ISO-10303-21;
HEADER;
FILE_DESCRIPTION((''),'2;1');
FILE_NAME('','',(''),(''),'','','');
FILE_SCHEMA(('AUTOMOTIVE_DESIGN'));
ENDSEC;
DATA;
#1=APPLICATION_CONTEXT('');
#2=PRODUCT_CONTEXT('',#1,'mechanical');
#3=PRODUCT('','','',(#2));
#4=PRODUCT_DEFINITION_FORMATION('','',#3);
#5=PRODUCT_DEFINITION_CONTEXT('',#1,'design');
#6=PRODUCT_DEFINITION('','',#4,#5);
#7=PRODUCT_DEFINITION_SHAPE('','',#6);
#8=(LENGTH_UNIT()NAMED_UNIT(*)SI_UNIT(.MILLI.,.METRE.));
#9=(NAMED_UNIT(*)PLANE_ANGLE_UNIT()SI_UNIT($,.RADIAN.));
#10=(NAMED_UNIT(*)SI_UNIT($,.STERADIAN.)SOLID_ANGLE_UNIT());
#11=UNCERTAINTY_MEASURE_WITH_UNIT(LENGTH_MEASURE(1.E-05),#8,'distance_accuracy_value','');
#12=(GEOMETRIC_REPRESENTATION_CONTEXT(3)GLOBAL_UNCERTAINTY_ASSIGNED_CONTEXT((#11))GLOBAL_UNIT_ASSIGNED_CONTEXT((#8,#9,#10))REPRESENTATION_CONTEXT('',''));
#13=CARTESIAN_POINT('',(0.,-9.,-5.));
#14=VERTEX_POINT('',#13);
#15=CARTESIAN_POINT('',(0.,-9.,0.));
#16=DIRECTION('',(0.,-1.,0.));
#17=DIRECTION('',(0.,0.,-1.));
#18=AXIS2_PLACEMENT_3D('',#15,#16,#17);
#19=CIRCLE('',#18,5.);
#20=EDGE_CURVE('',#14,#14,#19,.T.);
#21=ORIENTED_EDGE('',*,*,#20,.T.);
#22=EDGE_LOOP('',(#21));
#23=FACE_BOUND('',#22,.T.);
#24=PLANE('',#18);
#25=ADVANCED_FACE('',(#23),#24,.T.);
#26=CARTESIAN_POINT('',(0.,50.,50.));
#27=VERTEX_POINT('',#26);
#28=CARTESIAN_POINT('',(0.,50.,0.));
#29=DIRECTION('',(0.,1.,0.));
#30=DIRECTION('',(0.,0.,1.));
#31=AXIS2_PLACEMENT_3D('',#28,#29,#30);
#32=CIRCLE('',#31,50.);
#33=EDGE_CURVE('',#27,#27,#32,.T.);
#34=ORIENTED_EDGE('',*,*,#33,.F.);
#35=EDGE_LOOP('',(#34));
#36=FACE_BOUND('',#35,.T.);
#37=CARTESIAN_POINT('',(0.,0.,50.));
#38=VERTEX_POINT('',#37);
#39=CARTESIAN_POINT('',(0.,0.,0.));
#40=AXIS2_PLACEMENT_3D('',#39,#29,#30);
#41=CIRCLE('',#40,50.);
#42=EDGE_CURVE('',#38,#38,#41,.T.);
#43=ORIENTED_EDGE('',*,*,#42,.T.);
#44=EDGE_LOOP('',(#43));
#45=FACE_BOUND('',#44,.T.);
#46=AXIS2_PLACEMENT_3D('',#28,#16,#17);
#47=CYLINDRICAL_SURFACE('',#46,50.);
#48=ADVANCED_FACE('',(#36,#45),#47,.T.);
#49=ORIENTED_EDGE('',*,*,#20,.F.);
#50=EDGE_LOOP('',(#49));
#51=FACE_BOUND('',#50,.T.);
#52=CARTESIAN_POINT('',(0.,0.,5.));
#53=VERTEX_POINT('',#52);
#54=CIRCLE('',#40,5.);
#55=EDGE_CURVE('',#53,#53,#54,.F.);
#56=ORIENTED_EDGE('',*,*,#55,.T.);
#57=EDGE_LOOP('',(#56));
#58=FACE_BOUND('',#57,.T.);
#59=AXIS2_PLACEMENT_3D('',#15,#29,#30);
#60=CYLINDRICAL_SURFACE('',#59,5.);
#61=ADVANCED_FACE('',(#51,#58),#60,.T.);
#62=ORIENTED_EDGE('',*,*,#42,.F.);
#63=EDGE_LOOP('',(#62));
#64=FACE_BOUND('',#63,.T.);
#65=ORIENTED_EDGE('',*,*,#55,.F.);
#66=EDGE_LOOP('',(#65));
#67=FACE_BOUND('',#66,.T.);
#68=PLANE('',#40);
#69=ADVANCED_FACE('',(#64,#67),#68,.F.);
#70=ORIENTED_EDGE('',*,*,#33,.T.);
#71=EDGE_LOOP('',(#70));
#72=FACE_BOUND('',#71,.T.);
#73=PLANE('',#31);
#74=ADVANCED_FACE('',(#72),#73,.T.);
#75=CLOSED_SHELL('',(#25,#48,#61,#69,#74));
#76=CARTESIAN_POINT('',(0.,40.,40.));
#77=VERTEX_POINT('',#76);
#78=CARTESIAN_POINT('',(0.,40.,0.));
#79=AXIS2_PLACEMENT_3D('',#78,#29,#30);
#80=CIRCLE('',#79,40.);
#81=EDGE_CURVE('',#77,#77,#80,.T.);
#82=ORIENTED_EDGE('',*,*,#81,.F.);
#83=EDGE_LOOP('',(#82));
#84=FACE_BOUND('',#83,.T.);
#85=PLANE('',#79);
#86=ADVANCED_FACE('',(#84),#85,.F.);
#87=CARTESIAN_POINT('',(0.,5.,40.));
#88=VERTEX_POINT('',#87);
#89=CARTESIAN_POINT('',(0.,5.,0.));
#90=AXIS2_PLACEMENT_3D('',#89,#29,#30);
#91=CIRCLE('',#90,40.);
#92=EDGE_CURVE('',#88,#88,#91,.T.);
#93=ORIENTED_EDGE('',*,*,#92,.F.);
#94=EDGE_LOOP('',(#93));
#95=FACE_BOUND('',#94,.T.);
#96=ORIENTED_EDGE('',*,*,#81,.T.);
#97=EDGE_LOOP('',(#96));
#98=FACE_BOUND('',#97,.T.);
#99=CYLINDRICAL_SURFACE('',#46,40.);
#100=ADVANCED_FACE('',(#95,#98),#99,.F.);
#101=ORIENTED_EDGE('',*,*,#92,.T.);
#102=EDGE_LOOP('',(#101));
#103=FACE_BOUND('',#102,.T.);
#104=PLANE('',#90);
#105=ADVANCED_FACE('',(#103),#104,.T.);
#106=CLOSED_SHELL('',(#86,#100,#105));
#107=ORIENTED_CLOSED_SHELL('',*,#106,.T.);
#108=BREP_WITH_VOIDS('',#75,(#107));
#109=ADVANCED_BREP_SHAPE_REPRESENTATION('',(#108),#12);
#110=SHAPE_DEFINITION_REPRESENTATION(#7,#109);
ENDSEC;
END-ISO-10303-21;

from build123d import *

# Parameters (mm, degrees)
SKETCH_1_R        = 50
EXTRUDE_1_DEPTH   = 50
SHELL_START       = 5
SHELL_1_OUTLINE_R = 40
SHELL_1_DEPTH     = 35
SKETCH_2_R        = 5
EXTRUDE_2_DEPTH   = 9


# Read off the part's stored shape, not the designer's step: 抽壳1
with BuildPart() as part:
    # 草图1 → 凸台-拉伸1 (new body)
    with BuildSketch(Plane(origin=(0, 0, 0), x_dir=(1, 0, 0), z_dir=(0, 1, 0))):
        with Locations(Location((0, 0, 0), (0, 0, 270))):
            Circle(SKETCH_1_R)
    extrude(amount=EXTRUDE_1_DEPTH)

    # 抽壳1 outline → 抽壳1 (cut)
    with BuildSketch(Plane(origin=(0, 0, 0), x_dir=(1, 0, 0), z_dir=(0, 1, 0)).offset(SHELL_START)):
        Circle(SHELL_1_OUTLINE_R)
    extrude(amount=SHELL_1_DEPTH, mode=Mode.SUBTRACT)

    # 草图2 → 凸台-拉伸2 (add)
    with BuildSketch(Plane.XZ):
        with Locations(Location((0, 0, 0), (0, 0, 90))):
            Circle(SKETCH_2_R)
    extrude(amount=EXTRUDE_2_DEPTH)


solid = part.part
